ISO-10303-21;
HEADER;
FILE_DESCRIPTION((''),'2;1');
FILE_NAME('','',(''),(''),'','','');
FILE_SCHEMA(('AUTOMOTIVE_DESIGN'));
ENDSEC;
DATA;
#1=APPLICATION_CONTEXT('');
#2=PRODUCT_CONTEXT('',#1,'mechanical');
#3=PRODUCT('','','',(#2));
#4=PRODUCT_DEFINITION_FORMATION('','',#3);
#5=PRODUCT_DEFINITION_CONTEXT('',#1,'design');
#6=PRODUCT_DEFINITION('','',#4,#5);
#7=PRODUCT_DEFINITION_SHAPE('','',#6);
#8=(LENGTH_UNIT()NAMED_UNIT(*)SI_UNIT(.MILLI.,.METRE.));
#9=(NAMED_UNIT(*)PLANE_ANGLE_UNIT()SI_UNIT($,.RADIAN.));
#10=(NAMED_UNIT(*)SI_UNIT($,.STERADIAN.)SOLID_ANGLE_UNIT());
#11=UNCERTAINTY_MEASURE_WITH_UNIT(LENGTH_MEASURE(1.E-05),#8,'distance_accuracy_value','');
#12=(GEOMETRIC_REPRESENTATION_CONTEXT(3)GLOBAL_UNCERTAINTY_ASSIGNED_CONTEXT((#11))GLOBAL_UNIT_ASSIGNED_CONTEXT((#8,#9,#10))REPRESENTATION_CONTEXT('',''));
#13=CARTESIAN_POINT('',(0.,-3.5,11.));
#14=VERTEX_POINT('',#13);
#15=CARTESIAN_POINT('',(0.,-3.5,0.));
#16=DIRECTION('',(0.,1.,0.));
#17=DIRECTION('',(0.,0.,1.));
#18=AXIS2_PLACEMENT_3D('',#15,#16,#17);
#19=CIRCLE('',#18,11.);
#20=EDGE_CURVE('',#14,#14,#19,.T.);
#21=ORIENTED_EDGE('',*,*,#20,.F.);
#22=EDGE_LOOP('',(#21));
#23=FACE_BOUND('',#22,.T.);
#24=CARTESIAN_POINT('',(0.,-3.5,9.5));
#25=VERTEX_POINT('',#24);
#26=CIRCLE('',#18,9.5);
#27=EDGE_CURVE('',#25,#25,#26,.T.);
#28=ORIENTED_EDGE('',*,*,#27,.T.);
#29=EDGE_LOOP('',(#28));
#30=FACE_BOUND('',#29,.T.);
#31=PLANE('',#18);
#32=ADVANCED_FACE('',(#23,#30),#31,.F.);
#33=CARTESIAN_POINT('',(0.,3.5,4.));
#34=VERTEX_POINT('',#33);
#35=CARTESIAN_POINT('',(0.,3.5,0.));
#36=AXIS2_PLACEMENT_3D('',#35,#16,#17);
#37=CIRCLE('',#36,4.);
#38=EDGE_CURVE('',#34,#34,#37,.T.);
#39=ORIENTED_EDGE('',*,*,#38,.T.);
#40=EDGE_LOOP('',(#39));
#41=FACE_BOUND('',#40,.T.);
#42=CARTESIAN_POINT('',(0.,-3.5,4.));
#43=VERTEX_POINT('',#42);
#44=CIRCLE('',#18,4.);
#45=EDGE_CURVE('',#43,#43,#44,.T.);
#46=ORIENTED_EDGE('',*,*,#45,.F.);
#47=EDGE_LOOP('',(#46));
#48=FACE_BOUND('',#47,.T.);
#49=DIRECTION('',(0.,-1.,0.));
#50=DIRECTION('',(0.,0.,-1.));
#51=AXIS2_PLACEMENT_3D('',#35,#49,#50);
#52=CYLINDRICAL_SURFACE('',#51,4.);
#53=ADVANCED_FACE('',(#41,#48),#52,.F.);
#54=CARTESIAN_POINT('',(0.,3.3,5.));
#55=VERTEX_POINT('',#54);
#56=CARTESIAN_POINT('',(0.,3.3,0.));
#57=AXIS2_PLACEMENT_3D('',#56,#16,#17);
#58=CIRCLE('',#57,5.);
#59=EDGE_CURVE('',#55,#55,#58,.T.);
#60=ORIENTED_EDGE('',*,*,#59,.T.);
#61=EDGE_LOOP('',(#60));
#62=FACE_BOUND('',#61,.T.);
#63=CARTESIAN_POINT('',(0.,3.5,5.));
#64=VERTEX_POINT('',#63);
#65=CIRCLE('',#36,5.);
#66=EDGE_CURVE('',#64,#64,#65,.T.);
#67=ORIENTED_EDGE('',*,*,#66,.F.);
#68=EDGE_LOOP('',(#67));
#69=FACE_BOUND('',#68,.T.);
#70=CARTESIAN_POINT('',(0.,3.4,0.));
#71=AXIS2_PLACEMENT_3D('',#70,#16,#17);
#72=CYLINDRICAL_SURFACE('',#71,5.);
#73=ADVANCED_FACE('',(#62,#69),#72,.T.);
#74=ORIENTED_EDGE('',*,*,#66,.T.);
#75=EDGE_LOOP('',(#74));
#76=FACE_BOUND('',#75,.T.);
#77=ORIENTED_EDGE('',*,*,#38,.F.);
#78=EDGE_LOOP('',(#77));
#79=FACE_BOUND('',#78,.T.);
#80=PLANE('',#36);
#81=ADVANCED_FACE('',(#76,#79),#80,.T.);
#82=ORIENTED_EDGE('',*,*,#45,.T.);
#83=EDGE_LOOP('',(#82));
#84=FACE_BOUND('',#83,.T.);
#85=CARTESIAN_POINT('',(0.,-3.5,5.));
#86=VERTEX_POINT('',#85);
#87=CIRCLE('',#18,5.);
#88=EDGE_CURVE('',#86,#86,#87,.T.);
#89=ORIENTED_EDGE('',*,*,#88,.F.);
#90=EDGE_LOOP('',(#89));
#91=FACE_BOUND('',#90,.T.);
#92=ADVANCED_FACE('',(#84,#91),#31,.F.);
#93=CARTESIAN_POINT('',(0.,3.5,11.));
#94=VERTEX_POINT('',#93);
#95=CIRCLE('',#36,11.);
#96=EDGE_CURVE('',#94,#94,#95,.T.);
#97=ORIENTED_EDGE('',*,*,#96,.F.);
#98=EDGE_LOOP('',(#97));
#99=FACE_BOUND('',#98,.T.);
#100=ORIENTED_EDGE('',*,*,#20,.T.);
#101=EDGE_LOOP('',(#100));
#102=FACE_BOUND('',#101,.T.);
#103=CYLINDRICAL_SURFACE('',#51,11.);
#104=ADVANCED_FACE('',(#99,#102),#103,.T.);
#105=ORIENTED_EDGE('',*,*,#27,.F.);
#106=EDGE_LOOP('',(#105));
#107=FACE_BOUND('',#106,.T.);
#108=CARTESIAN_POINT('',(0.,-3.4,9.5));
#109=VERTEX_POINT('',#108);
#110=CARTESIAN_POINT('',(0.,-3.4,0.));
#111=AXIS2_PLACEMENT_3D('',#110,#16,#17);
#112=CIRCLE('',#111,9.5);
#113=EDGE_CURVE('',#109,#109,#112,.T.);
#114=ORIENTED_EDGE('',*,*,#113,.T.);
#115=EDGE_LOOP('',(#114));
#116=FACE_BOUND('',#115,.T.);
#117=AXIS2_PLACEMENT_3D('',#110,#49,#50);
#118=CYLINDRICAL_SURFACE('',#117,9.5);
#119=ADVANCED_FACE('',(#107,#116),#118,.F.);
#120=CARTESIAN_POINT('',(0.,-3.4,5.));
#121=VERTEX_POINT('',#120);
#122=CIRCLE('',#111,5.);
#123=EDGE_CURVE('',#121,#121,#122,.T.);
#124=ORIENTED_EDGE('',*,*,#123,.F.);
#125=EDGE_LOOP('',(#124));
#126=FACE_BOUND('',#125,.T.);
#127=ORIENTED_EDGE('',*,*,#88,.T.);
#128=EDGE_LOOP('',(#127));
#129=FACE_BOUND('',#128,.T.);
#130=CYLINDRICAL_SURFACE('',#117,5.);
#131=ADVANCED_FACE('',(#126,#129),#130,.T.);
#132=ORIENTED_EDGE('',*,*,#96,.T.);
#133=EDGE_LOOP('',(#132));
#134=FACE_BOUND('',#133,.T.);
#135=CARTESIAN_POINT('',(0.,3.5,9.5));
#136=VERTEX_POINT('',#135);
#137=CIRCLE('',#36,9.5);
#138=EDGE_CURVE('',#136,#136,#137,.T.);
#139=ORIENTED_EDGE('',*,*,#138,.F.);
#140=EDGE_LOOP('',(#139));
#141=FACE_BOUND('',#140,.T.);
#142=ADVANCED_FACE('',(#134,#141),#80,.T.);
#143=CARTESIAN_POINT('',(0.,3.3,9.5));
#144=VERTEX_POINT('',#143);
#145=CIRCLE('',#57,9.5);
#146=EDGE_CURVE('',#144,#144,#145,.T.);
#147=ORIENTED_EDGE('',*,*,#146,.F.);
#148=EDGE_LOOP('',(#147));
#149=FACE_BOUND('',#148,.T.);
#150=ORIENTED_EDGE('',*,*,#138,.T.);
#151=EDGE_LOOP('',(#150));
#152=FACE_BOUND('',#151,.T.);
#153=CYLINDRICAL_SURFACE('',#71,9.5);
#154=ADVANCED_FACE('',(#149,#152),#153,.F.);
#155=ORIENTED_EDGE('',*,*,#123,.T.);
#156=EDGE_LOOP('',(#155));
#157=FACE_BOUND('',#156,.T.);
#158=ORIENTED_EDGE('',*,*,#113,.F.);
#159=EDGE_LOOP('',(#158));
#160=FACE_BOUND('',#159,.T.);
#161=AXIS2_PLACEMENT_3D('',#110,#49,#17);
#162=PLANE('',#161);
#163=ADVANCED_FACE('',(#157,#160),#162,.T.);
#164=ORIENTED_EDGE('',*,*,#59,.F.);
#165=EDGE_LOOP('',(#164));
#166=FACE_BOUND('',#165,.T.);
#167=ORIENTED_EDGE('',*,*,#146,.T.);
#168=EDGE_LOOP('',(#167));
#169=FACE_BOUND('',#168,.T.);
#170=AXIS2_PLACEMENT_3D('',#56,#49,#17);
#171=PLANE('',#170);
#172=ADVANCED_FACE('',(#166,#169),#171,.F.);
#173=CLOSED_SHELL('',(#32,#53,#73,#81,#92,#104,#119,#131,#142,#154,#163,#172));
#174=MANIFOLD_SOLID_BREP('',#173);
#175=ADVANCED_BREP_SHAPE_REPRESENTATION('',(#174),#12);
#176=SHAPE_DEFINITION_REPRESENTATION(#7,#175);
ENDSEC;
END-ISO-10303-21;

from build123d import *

# Parameters (mm, degrees)
SKETCH1_R             = 11
SKETCH1_R_2           = 4
BOSS_EXTRUDE1_DEPTH   = 3.5
SKETCH2_R             = 9.5
SKETCH2_R_2           = 5
CUT_EXTRUDE1_DEPTH    = 0.1
MIRROR1_START         = -3.5
MIRROR1_OUTLINE_R     = 9.5
MIRROR1_OUTLINE_R_2   = 5
MIRROR1_DEPTH         = 0.1
MIRROR1_START_2       = 3.3
MIRROR1_2_OUTLINE_R   = 9.5
MIRROR1_2_OUTLINE_R_2 = 5
MIRROR1_2_DEPTH       = 0.1


# Read off the part's stored shape, not the designer's step: Mirror1
with BuildPart() as part:
    # Sketch1 → Boss-Extrude1 (new, symmetric)
    with BuildSketch(Plane(origin=(0, 0, 0), x_dir=(1, 0, 0), z_dir=(0, 1, 0))):
        with Locations(Location((0, 0, 0), (0, 0, 270))):
            Circle(SKETCH1_R)
        with Locations(Location((0, 0, 0), (0, 0, 270))):
            Circle(SKETCH1_R_2, mode=Mode.SUBTRACT)
    extrude(amount=BOSS_EXTRUDE1_DEPTH, both=True)

    # Sketch2 → Cut-Extrude1 (cut)
    with BuildSketch(Plane(origin=(0, 3.5, 0), x_dir=(1, 0, 0), z_dir=(0, 1, 0))):
        with Locations(Location((0, 0, 0), (0, 0, 270))):
            Circle(SKETCH2_R)
        with Locations(Location((0, 0, 0), (0, 0, 270))):
            Circle(SKETCH2_R_2, mode=Mode.SUBTRACT)
    extrude(amount=-CUT_EXTRUDE1_DEPTH, mode=Mode.SUBTRACT)

    # Mirror1 outline → Mirror1 (cut)
    with BuildSketch(Plane(origin=(0, 0, 0), x_dir=(1, 0, 0), z_dir=(0, 1, 0)).offset(MIRROR1_START)):
        Circle(MIRROR1_OUTLINE_R)
        Circle(MIRROR1_OUTLINE_R_2, mode=Mode.SUBTRACT)
    extrude(amount=MIRROR1_DEPTH, mode=Mode.SUBTRACT)

    # Mirror1 2 outline → Mirror1 2 (cut)
    with BuildSketch(Plane(origin=(0, 0, 0), x_dir=(1, 0, 0), z_dir=(0, 1, 0)).offset(MIRROR1_START_2)):
        Circle(MIRROR1_2_OUTLINE_R)
        Circle(MIRROR1_2_OUTLINE_R_2, mode=Mode.SUBTRACT)
    extrude(amount=MIRROR1_2_DEPTH, mode=Mode.SUBTRACT)


solid = part.part
